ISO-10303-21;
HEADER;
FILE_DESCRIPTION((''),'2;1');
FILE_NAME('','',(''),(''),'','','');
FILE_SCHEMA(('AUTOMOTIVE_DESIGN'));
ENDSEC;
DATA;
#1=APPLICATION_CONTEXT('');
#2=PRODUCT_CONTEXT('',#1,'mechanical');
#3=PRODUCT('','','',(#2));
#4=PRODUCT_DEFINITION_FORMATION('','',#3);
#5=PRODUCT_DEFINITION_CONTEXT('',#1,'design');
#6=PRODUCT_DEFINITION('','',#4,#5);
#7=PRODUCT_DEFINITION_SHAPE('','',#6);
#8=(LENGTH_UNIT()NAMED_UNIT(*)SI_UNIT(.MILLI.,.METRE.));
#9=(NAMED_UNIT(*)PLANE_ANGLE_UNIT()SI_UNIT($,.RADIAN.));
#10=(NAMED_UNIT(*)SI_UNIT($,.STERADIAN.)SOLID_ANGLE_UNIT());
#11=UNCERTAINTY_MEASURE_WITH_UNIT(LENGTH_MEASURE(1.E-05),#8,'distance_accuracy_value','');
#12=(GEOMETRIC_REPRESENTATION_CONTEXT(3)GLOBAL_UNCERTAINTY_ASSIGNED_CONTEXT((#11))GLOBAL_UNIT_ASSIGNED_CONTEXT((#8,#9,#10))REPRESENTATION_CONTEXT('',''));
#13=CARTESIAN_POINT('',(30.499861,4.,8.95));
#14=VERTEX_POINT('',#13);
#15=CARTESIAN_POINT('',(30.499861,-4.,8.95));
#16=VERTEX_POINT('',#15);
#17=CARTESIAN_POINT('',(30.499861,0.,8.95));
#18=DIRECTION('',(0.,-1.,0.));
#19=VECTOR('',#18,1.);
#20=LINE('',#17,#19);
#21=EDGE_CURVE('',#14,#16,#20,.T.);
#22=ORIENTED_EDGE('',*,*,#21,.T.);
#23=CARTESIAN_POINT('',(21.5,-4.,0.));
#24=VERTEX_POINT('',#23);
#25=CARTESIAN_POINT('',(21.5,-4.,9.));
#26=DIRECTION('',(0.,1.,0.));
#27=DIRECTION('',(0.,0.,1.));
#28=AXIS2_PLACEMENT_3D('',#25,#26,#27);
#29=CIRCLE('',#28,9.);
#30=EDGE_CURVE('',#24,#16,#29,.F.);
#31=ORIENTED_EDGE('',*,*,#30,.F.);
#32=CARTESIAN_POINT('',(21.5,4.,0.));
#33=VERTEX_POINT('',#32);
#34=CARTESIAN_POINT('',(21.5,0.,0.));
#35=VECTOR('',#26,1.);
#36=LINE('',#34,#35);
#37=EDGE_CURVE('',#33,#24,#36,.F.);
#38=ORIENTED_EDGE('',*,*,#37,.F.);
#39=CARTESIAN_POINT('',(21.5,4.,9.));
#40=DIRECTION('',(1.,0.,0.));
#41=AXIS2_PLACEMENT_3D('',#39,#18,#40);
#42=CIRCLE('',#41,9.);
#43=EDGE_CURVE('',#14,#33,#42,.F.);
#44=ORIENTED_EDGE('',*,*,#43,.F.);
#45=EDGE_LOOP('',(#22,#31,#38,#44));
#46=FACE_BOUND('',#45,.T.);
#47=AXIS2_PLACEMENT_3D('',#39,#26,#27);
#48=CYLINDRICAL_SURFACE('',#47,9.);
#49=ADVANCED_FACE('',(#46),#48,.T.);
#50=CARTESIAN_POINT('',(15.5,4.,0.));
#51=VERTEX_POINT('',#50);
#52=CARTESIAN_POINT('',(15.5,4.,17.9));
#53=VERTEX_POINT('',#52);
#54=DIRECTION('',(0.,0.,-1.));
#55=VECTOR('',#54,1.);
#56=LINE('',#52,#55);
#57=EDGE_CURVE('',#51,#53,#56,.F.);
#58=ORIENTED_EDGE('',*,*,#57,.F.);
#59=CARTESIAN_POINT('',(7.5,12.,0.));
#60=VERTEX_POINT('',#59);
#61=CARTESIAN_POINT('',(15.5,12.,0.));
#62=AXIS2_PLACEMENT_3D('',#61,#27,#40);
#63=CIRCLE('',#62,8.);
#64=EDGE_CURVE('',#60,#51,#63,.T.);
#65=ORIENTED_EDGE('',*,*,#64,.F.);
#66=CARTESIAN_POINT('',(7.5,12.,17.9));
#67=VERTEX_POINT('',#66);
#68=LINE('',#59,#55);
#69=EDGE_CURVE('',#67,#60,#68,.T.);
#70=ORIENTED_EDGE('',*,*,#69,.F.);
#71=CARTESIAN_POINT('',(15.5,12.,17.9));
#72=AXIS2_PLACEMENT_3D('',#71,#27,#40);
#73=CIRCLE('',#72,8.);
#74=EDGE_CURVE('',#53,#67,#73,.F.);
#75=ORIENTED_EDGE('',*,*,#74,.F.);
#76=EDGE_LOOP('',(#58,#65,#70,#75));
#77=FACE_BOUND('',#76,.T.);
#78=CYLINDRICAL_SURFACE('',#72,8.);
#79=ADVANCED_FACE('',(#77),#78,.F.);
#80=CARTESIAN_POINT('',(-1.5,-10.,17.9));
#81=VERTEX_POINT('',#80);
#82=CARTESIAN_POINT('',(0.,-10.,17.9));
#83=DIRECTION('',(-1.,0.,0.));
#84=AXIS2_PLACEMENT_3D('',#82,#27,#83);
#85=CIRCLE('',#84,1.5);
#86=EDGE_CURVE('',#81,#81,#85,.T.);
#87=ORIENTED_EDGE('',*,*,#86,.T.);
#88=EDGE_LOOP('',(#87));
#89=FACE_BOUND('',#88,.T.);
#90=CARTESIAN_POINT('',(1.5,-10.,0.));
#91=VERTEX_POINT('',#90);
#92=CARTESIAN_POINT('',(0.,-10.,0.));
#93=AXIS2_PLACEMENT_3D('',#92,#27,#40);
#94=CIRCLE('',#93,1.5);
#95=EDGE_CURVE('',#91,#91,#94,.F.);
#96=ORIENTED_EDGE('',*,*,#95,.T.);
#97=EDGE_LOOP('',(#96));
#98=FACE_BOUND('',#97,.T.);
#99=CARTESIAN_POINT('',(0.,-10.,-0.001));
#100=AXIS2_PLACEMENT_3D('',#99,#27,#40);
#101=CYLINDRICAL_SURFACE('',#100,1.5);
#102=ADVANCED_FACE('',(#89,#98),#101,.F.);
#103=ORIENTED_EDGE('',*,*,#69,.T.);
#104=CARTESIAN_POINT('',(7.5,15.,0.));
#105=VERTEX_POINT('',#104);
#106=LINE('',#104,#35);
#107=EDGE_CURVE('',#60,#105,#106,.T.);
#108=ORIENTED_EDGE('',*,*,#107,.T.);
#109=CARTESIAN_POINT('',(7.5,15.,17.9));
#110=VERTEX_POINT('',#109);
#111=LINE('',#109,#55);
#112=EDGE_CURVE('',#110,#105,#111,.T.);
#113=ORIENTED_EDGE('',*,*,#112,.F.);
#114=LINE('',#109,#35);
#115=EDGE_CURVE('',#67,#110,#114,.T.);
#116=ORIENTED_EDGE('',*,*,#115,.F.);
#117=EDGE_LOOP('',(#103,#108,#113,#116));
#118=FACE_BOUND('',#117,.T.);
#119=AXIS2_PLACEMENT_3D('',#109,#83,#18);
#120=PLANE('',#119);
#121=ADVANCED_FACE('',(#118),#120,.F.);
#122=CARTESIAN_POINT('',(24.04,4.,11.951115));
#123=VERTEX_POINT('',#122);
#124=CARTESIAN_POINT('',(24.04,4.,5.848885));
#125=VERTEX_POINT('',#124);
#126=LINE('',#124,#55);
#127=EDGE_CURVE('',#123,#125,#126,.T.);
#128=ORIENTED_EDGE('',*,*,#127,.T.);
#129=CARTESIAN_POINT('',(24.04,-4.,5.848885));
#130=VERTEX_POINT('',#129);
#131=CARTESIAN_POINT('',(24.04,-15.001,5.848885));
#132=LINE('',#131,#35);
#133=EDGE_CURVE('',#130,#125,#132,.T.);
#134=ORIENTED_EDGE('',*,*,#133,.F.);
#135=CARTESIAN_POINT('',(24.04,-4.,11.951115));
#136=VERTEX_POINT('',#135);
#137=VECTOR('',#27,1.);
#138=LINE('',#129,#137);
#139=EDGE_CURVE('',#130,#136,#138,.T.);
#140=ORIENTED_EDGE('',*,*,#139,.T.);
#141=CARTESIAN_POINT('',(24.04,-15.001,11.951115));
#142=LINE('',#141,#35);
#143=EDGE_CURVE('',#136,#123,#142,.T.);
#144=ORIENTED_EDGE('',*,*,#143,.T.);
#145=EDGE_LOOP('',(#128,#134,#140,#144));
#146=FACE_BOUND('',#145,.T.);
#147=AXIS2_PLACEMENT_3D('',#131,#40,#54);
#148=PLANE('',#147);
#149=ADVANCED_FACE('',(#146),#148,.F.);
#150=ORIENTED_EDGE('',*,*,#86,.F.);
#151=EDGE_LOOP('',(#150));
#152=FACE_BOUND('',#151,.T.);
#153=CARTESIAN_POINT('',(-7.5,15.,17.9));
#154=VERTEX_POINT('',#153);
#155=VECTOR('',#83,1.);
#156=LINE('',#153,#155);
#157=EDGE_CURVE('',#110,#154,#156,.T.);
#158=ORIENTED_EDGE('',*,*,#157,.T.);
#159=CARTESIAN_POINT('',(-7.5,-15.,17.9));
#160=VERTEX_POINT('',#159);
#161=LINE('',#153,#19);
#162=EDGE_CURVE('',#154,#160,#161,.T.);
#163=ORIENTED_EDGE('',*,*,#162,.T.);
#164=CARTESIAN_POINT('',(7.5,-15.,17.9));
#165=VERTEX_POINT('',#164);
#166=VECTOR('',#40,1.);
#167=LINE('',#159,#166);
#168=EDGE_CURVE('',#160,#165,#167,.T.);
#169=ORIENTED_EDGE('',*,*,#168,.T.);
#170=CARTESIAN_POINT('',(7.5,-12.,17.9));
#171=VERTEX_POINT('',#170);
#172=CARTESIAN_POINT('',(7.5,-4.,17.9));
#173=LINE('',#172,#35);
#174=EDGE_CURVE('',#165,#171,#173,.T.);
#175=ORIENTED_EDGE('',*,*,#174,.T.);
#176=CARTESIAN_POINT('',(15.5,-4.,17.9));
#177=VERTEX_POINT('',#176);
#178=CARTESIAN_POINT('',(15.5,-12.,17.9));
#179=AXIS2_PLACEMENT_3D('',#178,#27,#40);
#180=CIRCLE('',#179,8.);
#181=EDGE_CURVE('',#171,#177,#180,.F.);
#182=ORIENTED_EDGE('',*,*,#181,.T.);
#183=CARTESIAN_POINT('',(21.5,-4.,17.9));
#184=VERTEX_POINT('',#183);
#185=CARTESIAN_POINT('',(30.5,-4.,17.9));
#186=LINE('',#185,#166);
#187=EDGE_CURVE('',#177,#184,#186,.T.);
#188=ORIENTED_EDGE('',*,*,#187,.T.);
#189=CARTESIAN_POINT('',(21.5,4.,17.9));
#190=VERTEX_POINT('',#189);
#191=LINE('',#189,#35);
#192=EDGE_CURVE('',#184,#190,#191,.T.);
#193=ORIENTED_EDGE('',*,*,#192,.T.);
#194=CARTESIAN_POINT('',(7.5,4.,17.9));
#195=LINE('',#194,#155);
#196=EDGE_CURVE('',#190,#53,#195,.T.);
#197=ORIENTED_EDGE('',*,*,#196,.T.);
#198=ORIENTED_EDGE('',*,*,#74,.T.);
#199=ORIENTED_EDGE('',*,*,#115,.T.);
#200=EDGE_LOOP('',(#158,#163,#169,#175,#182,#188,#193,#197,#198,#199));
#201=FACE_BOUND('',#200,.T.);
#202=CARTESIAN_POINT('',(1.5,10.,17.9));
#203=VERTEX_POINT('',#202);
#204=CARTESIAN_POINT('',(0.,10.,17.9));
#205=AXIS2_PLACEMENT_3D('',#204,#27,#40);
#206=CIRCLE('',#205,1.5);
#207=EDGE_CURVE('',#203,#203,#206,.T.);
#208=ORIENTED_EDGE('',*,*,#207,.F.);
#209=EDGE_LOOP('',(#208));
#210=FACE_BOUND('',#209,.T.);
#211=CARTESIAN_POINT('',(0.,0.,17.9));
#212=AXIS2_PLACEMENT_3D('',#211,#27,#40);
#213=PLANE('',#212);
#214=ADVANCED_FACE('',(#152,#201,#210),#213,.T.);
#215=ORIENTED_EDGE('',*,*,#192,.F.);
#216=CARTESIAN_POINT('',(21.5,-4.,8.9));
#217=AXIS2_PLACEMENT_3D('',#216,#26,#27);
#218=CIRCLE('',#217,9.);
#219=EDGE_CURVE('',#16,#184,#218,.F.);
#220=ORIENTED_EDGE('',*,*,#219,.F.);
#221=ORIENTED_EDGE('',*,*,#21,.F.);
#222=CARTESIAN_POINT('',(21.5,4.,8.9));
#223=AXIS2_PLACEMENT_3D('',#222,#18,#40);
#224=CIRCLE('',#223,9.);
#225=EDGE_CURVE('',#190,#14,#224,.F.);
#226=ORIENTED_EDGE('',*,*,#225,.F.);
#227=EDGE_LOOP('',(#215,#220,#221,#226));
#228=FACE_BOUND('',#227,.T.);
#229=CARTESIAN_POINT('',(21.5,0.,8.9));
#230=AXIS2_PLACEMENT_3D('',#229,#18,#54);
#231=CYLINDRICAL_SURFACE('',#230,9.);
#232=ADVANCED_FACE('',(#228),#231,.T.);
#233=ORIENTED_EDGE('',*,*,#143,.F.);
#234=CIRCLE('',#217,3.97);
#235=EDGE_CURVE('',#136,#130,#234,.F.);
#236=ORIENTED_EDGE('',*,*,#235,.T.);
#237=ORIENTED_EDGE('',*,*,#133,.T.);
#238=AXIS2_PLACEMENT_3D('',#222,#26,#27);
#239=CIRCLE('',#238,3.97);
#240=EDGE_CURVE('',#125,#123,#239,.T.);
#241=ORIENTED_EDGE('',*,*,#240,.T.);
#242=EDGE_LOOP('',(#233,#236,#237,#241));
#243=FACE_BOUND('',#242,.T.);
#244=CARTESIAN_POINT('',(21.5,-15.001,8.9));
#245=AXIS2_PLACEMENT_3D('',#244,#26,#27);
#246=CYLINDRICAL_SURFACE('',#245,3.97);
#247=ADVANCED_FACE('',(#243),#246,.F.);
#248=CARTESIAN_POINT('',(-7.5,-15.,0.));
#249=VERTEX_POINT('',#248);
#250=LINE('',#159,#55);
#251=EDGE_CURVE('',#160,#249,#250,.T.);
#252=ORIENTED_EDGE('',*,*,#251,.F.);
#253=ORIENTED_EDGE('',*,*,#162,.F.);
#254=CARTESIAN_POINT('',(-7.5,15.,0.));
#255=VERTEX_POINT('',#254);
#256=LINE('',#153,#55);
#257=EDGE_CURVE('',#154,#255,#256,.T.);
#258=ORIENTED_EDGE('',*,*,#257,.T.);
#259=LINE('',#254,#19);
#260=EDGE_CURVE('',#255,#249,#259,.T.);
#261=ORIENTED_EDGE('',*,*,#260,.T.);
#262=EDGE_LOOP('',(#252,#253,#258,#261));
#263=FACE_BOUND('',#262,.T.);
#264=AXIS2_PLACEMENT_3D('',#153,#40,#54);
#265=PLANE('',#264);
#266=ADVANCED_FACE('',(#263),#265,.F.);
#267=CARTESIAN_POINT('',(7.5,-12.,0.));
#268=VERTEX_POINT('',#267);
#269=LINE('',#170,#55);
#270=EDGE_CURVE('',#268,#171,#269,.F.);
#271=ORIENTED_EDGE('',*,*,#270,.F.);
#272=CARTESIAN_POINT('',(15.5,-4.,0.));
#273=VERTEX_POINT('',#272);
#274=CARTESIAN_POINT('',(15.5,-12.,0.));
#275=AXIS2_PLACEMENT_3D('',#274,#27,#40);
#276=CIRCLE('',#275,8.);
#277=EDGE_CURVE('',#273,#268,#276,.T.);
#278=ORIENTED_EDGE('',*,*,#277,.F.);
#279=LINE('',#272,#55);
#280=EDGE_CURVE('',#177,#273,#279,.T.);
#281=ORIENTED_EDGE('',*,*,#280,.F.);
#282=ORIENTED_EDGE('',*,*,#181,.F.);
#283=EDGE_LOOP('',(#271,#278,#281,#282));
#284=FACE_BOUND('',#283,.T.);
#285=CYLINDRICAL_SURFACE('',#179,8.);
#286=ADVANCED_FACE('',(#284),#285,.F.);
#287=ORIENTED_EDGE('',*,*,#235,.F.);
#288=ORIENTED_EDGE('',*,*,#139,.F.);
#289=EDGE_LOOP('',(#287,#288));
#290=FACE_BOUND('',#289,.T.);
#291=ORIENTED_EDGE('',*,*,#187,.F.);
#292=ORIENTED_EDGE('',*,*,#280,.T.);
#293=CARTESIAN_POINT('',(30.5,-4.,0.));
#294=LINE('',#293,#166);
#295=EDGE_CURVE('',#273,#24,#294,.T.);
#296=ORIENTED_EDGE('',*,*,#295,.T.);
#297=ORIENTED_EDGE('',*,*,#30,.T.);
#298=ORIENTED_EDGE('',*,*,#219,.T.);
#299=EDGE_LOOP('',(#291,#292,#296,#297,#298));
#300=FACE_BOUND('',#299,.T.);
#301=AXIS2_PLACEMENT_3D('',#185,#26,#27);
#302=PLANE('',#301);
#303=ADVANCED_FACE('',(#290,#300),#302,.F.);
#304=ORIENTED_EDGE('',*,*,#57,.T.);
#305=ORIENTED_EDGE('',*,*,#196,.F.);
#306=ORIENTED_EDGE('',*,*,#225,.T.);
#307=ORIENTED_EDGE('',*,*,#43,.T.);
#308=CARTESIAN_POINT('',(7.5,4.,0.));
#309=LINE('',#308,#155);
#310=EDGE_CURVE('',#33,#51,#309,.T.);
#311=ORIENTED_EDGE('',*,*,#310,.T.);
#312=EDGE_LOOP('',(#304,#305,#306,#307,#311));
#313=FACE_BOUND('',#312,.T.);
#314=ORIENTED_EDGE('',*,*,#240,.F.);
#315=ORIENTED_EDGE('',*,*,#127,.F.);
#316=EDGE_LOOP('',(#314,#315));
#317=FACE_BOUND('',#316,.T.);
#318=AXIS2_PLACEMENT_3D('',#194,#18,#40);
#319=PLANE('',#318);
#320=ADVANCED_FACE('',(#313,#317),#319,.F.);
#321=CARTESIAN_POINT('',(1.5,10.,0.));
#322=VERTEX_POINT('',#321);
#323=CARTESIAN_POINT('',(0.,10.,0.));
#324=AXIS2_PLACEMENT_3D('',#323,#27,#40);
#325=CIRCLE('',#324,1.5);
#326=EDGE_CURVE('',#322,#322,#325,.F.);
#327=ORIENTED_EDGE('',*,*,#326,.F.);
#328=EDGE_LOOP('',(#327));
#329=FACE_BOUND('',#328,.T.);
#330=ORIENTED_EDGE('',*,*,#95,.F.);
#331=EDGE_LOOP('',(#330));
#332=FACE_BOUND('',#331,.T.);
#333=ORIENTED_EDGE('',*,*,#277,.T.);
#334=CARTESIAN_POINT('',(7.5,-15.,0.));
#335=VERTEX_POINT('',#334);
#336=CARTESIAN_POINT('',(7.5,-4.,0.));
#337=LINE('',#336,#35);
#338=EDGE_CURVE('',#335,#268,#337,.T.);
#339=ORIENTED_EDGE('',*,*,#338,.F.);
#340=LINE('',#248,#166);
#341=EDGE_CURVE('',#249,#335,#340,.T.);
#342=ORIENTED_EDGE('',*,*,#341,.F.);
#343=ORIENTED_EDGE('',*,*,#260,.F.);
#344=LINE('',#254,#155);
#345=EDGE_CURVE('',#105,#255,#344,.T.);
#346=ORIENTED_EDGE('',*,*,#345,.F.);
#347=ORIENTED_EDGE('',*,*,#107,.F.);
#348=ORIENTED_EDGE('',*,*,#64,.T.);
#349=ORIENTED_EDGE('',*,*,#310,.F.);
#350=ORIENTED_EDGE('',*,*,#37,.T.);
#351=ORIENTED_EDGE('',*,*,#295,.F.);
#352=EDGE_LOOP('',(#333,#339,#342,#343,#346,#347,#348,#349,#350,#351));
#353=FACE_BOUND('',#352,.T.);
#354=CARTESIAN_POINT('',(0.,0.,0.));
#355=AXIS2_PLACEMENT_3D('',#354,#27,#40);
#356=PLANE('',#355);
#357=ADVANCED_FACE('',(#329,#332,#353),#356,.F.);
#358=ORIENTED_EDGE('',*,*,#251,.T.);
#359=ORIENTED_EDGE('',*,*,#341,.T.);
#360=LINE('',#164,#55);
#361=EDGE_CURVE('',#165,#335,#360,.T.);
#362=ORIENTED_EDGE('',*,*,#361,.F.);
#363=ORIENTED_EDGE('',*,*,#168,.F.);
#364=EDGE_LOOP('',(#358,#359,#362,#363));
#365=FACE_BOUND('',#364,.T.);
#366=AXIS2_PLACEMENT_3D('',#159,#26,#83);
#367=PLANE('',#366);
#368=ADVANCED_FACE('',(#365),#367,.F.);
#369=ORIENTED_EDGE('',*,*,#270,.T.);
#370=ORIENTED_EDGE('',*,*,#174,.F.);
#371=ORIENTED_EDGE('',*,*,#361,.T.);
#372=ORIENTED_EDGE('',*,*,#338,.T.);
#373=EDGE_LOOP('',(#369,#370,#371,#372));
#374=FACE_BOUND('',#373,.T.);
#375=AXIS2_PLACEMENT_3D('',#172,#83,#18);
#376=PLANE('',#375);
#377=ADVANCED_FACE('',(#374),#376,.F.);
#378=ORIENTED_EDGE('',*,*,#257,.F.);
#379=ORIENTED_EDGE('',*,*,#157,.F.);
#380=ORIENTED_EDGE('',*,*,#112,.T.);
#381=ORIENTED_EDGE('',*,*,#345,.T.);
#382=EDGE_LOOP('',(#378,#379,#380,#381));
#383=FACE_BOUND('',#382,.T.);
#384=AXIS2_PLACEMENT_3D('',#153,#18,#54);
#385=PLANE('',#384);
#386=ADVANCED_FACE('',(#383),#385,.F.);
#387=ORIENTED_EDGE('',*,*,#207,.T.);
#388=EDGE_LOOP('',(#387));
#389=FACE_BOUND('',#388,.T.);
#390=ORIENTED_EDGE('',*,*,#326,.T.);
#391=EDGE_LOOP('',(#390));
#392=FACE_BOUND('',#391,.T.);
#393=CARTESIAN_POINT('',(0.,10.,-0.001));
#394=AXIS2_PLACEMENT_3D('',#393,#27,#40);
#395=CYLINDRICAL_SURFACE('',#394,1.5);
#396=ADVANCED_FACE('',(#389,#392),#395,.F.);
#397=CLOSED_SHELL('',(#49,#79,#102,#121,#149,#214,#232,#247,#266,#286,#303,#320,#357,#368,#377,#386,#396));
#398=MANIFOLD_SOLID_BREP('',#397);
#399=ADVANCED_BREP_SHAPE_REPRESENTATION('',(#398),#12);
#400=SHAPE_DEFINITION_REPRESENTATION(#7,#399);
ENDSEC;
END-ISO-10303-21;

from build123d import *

# Parameters (mm, degrees)
BOSS_EXTRU_1_DEPTH      = 17.9
CONG_1_R                = 9
ENL_V_MAT_EXTRU_1_REACH = 42.145
ENL_V_MAT_EXTRU_2_REACH = 40.414
ESQUISSE3_R             = 1.5
CONG_2_R                = 8


with BuildPart() as part:
    # Esquisse1 → Boss.-Extru.1 (new body)
    with BuildSketch(Plane.XY):
        Polygon((7.5, 4), (30.5, 4), (30.5, -4), (7.5, -4), (7.5, -15), (-7.5, -15), (-7.5, 15), (7.5, 15), align=None)
    extrude(amount=BOSS_EXTRU_1_DEPTH)

    # Congé1
    # the kernel refuses this fillet: 9 mm, written as the material it takes off along each edge
    with BuildSketch(Plane(origin=(30.5, 26.5, 0), x_dir=(0, 0, 1), z_dir=(0, -1, 0))) as cong_1_piece_1:
        with BuildLine():
            CenterArc((CONG_1_R, CONG_1_R), CONG_1_R, 180, 90)
            Line((0, CONG_1_R), (0, 0))
            Line((0, 0), (CONG_1_R, 0))
        make_face()
    extrude(amount=53, mode=Mode.SUBTRACT)
    with BuildSketch(Plane(origin=(30.5, 26.5, 17.9), x_dir=(0, 0, -1), z_dir=(0, -1, 0))) as cong_1_piece_2:
        with BuildLine():
            CenterArc((CONG_1_R, -CONG_1_R), CONG_1_R, 90, 90)
            Line((0, -CONG_1_R), (0, 0))
            Line((0, 0), (CONG_1_R, 0))
        make_face()
    extrude(amount=53, mode=Mode.SUBTRACT)

    # Esquisse2 → Enlèv. mat.-Extru.1 (cut, up to next)
    with BuildSketch(Plane(origin=(0, 4, 0), x_dir=(1, 0, 0), z_dir=(0, 1, 0)), mode=Mode.PRIVATE) as enl_v_mat_extru_1_sk1:
        with BuildLine():
            Line((24.04, -5.84888545), (24.04, -11.95111455))
            ThreePointArc((24.04, -11.95111455), (17.53, -8.9), (24.04, -5.84888545))
        make_face()
    enl_v_mat_extru_1_tool1 = extrude(enl_v_mat_extru_1_sk1.sketch, amount=-ENL_V_MAT_EXTRU_1_REACH, mode=Mode.PRIVATE) & part.part
    add(enl_v_mat_extru_1_tool1.solids().sort_by_distance((21.06418, 4, 8.9))[0], mode=Mode.SUBTRACT)

    # Esquisse3 → Enlèv. mat.-Extru.2 (cut, up to next)
    with BuildSketch(Plane.XY.offset(17.9), mode=Mode.PRIVATE) as enl_v_mat_extru_2_sk1:
        with Locations((0, 10)):
            Circle(ESQUISSE3_R)
    enl_v_mat_extru_2_tool1 = extrude(enl_v_mat_extru_2_sk1.sketch, amount=-ENL_V_MAT_EXTRU_2_REACH, mode=Mode.PRIVATE) & part.part
    # Esquisse3 → Enlèv. mat.-Extru.2 (cut, up to next)
    with BuildSketch(Plane.XY.offset(17.9), mode=Mode.PRIVATE) as enl_v_mat_extru_2_sk2:
        with Locations((0, -10)):
            Circle(ESQUISSE3_R)
    enl_v_mat_extru_2_tool2 = extrude(enl_v_mat_extru_2_sk2.sketch, amount=-ENL_V_MAT_EXTRU_2_REACH, mode=Mode.PRIVATE) & part.part
    add(enl_v_mat_extru_2_tool1.solids().sort_by_distance((0, 10, 17.9))[0], mode=Mode.SUBTRACT)
    add(enl_v_mat_extru_2_tool2.solids().sort_by_distance((0, -10, 17.9))[0], mode=Mode.SUBTRACT)

    # Congé2
    cong_2_edges = [part.edges().sort_by_distance(p)[0] for p in [
        (7.5, 4, 8.95),
        (7.5, -4, 8.95),
    ]]
    fillet(cong_2_edges, radius=CONG_2_R)


solid = part.part
